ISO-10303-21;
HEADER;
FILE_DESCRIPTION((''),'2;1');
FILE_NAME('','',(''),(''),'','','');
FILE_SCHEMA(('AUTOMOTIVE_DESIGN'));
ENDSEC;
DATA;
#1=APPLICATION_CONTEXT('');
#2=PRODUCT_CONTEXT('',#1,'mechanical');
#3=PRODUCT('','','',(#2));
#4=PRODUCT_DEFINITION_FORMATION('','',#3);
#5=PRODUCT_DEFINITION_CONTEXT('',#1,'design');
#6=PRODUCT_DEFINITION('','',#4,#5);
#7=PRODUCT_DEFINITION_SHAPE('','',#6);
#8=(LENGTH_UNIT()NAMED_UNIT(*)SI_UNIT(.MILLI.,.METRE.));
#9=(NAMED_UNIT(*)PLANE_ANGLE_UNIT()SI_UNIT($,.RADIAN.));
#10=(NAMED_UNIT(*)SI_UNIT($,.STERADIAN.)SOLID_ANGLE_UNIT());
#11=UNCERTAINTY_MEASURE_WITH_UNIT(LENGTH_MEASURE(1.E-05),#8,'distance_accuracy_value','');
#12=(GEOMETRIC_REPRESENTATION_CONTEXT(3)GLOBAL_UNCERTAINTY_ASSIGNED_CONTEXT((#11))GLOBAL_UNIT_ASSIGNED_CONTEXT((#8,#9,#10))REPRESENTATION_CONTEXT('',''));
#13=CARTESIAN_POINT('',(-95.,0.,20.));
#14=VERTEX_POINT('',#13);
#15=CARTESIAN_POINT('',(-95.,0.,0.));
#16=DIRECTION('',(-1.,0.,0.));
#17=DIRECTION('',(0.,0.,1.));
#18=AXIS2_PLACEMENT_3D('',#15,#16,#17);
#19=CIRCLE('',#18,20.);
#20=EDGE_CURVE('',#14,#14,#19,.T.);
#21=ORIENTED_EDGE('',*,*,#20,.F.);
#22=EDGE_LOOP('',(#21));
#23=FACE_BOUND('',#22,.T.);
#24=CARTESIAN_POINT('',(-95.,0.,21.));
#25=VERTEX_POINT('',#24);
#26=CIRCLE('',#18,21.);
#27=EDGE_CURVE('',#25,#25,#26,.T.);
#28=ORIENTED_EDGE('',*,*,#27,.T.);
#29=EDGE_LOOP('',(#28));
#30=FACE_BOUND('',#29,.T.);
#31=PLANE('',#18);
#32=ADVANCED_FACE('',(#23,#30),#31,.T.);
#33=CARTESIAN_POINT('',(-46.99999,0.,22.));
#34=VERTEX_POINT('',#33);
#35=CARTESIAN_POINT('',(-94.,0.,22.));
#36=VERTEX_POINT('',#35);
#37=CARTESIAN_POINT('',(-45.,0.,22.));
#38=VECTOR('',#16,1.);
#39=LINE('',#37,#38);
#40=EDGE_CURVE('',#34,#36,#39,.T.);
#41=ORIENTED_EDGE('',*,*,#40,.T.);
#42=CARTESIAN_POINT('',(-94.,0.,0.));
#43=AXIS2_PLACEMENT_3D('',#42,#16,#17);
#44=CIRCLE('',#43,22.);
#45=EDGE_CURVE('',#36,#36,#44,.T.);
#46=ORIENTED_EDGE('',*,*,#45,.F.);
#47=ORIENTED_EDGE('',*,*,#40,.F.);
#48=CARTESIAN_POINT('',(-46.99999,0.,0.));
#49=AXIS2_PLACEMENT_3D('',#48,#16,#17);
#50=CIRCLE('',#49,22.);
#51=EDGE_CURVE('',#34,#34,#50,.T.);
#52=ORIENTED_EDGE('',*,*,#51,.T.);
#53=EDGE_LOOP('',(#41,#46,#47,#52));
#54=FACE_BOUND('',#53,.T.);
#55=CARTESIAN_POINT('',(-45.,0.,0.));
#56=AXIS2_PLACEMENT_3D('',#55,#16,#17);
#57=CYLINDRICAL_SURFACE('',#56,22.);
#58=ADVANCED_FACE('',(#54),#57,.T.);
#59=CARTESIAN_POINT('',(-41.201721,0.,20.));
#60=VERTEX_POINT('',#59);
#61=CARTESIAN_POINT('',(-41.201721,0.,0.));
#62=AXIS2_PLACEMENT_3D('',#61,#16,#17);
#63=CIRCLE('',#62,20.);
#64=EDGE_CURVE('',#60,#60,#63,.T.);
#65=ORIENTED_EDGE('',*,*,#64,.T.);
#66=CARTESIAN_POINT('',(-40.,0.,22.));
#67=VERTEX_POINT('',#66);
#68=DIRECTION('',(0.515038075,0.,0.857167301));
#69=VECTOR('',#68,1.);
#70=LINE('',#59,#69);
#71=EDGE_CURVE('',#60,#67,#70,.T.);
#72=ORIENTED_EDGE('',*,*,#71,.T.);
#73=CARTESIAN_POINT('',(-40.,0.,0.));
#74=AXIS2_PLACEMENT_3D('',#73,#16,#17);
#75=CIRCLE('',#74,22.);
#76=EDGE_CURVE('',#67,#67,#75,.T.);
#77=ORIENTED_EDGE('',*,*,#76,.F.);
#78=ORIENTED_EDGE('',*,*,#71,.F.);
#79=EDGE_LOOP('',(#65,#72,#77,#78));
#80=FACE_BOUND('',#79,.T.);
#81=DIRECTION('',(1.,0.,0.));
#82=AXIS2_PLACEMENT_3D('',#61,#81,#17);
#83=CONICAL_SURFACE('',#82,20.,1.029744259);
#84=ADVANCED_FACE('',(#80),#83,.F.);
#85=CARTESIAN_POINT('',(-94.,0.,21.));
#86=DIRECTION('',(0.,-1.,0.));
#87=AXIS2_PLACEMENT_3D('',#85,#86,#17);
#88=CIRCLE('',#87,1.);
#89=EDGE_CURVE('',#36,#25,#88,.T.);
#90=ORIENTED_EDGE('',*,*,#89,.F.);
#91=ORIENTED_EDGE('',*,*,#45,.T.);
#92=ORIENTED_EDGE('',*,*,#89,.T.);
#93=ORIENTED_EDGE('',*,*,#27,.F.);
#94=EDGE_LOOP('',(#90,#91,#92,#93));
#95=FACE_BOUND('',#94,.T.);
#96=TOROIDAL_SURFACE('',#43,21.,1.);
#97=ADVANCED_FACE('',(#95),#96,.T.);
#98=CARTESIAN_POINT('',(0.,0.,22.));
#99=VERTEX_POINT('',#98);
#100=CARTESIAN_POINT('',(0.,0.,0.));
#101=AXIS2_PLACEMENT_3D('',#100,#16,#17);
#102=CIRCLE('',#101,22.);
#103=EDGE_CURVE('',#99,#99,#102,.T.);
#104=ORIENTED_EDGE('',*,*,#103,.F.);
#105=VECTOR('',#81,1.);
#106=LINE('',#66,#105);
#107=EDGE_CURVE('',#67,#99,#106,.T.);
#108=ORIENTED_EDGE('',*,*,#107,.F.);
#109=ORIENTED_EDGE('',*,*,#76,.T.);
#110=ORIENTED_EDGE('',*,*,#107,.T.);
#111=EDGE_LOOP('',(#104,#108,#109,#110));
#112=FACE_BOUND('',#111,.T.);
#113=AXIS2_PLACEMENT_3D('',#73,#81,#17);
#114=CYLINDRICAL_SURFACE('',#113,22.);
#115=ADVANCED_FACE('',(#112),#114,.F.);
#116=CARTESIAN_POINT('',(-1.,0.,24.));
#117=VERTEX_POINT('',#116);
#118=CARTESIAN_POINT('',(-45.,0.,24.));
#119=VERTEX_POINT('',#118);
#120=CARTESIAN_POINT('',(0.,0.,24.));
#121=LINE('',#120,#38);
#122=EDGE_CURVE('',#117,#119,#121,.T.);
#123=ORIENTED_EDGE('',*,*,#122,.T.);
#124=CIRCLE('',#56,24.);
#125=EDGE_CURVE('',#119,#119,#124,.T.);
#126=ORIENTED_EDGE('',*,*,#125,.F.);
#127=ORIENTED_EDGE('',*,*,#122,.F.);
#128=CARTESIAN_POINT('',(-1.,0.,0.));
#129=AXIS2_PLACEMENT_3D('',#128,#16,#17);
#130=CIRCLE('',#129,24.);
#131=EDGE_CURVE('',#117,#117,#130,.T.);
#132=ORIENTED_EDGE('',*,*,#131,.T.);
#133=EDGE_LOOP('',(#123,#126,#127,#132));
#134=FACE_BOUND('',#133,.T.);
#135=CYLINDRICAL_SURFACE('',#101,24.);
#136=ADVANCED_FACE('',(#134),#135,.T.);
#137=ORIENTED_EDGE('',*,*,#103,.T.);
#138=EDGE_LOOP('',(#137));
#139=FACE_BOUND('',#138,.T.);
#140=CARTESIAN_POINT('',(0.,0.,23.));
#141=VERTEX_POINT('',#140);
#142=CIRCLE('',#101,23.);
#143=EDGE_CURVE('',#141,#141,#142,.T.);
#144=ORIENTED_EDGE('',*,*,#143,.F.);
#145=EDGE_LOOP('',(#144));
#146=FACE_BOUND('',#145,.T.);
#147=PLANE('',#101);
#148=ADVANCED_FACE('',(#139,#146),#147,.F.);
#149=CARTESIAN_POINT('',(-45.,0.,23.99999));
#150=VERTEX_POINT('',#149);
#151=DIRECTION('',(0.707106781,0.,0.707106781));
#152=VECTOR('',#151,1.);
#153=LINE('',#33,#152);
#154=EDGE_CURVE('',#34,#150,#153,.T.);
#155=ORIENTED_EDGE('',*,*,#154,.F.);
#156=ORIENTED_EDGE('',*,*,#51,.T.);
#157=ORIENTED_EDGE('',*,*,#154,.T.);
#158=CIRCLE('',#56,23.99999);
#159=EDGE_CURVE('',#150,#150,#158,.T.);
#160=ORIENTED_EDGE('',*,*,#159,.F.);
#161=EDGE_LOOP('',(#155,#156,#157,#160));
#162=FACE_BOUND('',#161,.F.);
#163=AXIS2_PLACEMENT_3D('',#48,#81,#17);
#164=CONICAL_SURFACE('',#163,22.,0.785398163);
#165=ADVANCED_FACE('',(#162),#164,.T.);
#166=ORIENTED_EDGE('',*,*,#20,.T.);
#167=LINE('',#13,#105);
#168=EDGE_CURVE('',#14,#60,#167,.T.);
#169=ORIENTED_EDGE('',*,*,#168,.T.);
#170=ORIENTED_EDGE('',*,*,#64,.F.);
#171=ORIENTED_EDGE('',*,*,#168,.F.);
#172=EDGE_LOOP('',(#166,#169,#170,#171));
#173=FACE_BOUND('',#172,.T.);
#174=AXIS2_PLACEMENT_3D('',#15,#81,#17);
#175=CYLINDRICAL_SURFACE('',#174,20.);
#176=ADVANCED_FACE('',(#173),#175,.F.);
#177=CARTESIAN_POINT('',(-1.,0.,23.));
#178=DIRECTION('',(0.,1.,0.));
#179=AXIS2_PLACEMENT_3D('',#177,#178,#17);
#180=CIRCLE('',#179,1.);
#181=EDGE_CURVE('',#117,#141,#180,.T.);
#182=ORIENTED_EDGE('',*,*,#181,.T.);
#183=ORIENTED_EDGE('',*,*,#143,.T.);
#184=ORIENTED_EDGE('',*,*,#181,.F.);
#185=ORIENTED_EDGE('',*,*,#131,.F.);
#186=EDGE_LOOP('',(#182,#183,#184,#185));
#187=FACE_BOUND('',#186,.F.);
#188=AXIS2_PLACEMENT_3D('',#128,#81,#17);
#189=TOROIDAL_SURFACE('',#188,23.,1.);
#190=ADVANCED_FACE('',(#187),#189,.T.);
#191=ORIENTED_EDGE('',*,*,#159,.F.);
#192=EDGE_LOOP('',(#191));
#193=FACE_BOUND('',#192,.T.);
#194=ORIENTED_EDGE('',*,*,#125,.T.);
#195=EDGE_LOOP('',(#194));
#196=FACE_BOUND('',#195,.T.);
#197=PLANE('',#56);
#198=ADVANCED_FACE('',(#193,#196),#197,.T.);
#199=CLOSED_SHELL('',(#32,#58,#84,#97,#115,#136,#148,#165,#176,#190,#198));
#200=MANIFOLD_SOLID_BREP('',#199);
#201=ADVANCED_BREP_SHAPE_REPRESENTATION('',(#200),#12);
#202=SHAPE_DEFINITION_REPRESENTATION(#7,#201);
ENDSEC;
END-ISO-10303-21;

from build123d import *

# Parameters (mm, degrees)
F2_SIZE = 1.99999
F3_R    = 1


# Not quite as in the source:
# - a fillet or chamfer is up to 0.001 mm smaller than in the source, because OpenCascade refuses the exact size


with BuildPart() as f1:
    # F0 (on Front) → F1 (revolve)
    with BuildSketch(Plane.XZ):
        Polygon((-45, 22), (-95, 22), (-95, 20), (-41.2017212381, 20), (-40, 22), (0, 22), (0, 24), (-45, 24), align=None)
    revolve(axis=Axis((-59.3267625081, 0, 0), (-1, 0, 0)))

    # F2 (size 2 in the source; OpenCascade refuses exactly that, so slightly less here)
    f2_edges = [f1.edges().sort_by_distance(p)[0] for p in [
        (-45, 0, -22),
    ]]
    chamfer(f2_edges, length=F2_SIZE)

    # F3
    f3_edges = [f1.edges().sort_by_distance(p)[0] for p in [
        (0, 0, -24),
        (-95, 0, -22),
    ]]
    fillet(f3_edges, radius=F3_R)


solid = f1.part
